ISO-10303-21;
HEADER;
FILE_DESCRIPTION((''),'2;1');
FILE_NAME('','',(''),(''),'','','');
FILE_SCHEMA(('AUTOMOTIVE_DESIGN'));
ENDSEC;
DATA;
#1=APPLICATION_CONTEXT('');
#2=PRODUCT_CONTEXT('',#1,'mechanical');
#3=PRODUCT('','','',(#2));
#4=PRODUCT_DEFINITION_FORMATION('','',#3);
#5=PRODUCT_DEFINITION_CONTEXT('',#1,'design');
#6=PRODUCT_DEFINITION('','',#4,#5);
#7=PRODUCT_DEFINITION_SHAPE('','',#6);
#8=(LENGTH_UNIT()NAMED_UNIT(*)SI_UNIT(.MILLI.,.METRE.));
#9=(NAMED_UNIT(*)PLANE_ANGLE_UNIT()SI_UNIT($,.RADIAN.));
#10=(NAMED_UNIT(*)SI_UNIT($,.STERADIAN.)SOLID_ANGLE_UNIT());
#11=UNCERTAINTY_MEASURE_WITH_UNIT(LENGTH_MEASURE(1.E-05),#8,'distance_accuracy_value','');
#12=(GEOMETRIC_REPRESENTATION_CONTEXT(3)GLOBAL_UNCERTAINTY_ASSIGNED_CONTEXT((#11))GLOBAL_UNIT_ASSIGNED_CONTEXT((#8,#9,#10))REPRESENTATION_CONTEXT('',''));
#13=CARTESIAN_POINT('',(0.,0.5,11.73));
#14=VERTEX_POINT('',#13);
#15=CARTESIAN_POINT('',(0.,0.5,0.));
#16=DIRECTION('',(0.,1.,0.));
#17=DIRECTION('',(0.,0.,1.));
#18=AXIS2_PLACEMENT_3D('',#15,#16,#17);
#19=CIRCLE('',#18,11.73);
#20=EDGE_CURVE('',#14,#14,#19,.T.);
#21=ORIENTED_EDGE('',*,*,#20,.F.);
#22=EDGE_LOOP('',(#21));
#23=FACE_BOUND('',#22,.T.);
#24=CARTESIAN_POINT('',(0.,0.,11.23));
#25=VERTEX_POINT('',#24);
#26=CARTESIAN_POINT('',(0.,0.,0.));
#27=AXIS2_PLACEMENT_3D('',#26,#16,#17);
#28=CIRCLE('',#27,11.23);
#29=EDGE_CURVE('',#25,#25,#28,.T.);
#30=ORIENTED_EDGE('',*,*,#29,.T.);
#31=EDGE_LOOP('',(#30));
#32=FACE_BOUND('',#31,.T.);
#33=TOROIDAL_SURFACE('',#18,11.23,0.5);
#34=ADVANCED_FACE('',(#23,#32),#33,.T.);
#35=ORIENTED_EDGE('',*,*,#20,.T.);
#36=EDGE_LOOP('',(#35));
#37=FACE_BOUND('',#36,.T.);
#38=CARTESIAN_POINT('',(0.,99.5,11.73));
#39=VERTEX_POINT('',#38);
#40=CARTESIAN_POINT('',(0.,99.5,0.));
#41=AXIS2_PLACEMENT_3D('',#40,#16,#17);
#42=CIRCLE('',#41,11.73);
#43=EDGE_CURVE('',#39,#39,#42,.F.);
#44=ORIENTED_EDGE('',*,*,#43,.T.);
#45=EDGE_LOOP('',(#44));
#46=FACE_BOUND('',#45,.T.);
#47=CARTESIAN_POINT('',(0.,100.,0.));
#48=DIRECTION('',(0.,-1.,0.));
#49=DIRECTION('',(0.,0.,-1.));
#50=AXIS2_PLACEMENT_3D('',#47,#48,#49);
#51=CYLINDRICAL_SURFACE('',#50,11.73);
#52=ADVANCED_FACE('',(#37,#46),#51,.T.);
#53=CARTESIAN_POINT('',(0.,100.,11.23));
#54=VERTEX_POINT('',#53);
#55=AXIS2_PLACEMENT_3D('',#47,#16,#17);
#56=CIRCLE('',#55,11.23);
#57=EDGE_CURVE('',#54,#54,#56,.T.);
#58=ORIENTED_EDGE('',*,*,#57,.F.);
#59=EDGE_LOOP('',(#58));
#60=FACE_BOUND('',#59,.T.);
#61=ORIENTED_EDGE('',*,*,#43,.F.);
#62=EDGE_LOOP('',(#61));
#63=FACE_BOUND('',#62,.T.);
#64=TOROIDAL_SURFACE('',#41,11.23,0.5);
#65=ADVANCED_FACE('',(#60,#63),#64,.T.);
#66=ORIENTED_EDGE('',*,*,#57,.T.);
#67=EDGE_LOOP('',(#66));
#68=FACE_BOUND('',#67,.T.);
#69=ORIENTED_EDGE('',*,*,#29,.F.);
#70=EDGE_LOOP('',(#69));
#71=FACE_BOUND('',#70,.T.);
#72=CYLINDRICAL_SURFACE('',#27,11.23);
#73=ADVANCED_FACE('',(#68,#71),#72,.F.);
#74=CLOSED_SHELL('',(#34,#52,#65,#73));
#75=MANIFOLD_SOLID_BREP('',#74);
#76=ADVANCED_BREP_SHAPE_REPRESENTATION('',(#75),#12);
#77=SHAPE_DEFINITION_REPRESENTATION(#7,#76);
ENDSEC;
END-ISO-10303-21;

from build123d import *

# Parameters (mm, degrees)
CROQUIS1_R              = 11.73
SALIENTE_EXTRUIR1_DEPTH = 100
CROQUIS2_R              = 11.23
CORTAR_EXTRUIR1_DEPTH   = 102.366591143
REDONDEO1_R             = 0.5
REDONDEO4_R             = 0.5


with BuildPart() as part:
    # Croquis1 → Saliente-Extruir1 (new body)
    with BuildSketch(Plane(origin=(0, 0, 0), x_dir=(1, 0, 0), z_dir=(0, 1, 0))):
        with Locations(Location((0, 0, 0), (0, 0, 270))):
            Circle(CROQUIS1_R)
    extrude(amount=SALIENTE_EXTRUIR1_DEPTH)

    # Croquis2 → Cortar-Extruir1 (cut, through all)
    with BuildSketch(Plane(origin=(0, 100, 0), x_dir=(1, 0, 0), z_dir=(0, 1, 0))):
        with Locations(Location((0, 0, 0), (0, 0, 270))):
            Circle(CROQUIS2_R)
    extrude(amount=-CORTAR_EXTRUIR1_DEPTH, mode=Mode.SUBTRACT)

    # Redondeo1
    redondeo1_edges = [part.edges().sort_by_distance(p)[0] for p in [
        (0, 100, -11.73),
    ]]
    fillet(redondeo1_edges, radius=REDONDEO1_R - 0.0001)  # a hair under: the kernel refuses the full size

    # Redondeo4
    redondeo4_edges = [part.edges().sort_by_distance(p)[0] for p in [
        (0, 0, -11.73),
    ]]
    fillet(redondeo4_edges, radius=REDONDEO4_R - 0.0001)  # a hair under: the kernel refuses the full size


solid = part.part
